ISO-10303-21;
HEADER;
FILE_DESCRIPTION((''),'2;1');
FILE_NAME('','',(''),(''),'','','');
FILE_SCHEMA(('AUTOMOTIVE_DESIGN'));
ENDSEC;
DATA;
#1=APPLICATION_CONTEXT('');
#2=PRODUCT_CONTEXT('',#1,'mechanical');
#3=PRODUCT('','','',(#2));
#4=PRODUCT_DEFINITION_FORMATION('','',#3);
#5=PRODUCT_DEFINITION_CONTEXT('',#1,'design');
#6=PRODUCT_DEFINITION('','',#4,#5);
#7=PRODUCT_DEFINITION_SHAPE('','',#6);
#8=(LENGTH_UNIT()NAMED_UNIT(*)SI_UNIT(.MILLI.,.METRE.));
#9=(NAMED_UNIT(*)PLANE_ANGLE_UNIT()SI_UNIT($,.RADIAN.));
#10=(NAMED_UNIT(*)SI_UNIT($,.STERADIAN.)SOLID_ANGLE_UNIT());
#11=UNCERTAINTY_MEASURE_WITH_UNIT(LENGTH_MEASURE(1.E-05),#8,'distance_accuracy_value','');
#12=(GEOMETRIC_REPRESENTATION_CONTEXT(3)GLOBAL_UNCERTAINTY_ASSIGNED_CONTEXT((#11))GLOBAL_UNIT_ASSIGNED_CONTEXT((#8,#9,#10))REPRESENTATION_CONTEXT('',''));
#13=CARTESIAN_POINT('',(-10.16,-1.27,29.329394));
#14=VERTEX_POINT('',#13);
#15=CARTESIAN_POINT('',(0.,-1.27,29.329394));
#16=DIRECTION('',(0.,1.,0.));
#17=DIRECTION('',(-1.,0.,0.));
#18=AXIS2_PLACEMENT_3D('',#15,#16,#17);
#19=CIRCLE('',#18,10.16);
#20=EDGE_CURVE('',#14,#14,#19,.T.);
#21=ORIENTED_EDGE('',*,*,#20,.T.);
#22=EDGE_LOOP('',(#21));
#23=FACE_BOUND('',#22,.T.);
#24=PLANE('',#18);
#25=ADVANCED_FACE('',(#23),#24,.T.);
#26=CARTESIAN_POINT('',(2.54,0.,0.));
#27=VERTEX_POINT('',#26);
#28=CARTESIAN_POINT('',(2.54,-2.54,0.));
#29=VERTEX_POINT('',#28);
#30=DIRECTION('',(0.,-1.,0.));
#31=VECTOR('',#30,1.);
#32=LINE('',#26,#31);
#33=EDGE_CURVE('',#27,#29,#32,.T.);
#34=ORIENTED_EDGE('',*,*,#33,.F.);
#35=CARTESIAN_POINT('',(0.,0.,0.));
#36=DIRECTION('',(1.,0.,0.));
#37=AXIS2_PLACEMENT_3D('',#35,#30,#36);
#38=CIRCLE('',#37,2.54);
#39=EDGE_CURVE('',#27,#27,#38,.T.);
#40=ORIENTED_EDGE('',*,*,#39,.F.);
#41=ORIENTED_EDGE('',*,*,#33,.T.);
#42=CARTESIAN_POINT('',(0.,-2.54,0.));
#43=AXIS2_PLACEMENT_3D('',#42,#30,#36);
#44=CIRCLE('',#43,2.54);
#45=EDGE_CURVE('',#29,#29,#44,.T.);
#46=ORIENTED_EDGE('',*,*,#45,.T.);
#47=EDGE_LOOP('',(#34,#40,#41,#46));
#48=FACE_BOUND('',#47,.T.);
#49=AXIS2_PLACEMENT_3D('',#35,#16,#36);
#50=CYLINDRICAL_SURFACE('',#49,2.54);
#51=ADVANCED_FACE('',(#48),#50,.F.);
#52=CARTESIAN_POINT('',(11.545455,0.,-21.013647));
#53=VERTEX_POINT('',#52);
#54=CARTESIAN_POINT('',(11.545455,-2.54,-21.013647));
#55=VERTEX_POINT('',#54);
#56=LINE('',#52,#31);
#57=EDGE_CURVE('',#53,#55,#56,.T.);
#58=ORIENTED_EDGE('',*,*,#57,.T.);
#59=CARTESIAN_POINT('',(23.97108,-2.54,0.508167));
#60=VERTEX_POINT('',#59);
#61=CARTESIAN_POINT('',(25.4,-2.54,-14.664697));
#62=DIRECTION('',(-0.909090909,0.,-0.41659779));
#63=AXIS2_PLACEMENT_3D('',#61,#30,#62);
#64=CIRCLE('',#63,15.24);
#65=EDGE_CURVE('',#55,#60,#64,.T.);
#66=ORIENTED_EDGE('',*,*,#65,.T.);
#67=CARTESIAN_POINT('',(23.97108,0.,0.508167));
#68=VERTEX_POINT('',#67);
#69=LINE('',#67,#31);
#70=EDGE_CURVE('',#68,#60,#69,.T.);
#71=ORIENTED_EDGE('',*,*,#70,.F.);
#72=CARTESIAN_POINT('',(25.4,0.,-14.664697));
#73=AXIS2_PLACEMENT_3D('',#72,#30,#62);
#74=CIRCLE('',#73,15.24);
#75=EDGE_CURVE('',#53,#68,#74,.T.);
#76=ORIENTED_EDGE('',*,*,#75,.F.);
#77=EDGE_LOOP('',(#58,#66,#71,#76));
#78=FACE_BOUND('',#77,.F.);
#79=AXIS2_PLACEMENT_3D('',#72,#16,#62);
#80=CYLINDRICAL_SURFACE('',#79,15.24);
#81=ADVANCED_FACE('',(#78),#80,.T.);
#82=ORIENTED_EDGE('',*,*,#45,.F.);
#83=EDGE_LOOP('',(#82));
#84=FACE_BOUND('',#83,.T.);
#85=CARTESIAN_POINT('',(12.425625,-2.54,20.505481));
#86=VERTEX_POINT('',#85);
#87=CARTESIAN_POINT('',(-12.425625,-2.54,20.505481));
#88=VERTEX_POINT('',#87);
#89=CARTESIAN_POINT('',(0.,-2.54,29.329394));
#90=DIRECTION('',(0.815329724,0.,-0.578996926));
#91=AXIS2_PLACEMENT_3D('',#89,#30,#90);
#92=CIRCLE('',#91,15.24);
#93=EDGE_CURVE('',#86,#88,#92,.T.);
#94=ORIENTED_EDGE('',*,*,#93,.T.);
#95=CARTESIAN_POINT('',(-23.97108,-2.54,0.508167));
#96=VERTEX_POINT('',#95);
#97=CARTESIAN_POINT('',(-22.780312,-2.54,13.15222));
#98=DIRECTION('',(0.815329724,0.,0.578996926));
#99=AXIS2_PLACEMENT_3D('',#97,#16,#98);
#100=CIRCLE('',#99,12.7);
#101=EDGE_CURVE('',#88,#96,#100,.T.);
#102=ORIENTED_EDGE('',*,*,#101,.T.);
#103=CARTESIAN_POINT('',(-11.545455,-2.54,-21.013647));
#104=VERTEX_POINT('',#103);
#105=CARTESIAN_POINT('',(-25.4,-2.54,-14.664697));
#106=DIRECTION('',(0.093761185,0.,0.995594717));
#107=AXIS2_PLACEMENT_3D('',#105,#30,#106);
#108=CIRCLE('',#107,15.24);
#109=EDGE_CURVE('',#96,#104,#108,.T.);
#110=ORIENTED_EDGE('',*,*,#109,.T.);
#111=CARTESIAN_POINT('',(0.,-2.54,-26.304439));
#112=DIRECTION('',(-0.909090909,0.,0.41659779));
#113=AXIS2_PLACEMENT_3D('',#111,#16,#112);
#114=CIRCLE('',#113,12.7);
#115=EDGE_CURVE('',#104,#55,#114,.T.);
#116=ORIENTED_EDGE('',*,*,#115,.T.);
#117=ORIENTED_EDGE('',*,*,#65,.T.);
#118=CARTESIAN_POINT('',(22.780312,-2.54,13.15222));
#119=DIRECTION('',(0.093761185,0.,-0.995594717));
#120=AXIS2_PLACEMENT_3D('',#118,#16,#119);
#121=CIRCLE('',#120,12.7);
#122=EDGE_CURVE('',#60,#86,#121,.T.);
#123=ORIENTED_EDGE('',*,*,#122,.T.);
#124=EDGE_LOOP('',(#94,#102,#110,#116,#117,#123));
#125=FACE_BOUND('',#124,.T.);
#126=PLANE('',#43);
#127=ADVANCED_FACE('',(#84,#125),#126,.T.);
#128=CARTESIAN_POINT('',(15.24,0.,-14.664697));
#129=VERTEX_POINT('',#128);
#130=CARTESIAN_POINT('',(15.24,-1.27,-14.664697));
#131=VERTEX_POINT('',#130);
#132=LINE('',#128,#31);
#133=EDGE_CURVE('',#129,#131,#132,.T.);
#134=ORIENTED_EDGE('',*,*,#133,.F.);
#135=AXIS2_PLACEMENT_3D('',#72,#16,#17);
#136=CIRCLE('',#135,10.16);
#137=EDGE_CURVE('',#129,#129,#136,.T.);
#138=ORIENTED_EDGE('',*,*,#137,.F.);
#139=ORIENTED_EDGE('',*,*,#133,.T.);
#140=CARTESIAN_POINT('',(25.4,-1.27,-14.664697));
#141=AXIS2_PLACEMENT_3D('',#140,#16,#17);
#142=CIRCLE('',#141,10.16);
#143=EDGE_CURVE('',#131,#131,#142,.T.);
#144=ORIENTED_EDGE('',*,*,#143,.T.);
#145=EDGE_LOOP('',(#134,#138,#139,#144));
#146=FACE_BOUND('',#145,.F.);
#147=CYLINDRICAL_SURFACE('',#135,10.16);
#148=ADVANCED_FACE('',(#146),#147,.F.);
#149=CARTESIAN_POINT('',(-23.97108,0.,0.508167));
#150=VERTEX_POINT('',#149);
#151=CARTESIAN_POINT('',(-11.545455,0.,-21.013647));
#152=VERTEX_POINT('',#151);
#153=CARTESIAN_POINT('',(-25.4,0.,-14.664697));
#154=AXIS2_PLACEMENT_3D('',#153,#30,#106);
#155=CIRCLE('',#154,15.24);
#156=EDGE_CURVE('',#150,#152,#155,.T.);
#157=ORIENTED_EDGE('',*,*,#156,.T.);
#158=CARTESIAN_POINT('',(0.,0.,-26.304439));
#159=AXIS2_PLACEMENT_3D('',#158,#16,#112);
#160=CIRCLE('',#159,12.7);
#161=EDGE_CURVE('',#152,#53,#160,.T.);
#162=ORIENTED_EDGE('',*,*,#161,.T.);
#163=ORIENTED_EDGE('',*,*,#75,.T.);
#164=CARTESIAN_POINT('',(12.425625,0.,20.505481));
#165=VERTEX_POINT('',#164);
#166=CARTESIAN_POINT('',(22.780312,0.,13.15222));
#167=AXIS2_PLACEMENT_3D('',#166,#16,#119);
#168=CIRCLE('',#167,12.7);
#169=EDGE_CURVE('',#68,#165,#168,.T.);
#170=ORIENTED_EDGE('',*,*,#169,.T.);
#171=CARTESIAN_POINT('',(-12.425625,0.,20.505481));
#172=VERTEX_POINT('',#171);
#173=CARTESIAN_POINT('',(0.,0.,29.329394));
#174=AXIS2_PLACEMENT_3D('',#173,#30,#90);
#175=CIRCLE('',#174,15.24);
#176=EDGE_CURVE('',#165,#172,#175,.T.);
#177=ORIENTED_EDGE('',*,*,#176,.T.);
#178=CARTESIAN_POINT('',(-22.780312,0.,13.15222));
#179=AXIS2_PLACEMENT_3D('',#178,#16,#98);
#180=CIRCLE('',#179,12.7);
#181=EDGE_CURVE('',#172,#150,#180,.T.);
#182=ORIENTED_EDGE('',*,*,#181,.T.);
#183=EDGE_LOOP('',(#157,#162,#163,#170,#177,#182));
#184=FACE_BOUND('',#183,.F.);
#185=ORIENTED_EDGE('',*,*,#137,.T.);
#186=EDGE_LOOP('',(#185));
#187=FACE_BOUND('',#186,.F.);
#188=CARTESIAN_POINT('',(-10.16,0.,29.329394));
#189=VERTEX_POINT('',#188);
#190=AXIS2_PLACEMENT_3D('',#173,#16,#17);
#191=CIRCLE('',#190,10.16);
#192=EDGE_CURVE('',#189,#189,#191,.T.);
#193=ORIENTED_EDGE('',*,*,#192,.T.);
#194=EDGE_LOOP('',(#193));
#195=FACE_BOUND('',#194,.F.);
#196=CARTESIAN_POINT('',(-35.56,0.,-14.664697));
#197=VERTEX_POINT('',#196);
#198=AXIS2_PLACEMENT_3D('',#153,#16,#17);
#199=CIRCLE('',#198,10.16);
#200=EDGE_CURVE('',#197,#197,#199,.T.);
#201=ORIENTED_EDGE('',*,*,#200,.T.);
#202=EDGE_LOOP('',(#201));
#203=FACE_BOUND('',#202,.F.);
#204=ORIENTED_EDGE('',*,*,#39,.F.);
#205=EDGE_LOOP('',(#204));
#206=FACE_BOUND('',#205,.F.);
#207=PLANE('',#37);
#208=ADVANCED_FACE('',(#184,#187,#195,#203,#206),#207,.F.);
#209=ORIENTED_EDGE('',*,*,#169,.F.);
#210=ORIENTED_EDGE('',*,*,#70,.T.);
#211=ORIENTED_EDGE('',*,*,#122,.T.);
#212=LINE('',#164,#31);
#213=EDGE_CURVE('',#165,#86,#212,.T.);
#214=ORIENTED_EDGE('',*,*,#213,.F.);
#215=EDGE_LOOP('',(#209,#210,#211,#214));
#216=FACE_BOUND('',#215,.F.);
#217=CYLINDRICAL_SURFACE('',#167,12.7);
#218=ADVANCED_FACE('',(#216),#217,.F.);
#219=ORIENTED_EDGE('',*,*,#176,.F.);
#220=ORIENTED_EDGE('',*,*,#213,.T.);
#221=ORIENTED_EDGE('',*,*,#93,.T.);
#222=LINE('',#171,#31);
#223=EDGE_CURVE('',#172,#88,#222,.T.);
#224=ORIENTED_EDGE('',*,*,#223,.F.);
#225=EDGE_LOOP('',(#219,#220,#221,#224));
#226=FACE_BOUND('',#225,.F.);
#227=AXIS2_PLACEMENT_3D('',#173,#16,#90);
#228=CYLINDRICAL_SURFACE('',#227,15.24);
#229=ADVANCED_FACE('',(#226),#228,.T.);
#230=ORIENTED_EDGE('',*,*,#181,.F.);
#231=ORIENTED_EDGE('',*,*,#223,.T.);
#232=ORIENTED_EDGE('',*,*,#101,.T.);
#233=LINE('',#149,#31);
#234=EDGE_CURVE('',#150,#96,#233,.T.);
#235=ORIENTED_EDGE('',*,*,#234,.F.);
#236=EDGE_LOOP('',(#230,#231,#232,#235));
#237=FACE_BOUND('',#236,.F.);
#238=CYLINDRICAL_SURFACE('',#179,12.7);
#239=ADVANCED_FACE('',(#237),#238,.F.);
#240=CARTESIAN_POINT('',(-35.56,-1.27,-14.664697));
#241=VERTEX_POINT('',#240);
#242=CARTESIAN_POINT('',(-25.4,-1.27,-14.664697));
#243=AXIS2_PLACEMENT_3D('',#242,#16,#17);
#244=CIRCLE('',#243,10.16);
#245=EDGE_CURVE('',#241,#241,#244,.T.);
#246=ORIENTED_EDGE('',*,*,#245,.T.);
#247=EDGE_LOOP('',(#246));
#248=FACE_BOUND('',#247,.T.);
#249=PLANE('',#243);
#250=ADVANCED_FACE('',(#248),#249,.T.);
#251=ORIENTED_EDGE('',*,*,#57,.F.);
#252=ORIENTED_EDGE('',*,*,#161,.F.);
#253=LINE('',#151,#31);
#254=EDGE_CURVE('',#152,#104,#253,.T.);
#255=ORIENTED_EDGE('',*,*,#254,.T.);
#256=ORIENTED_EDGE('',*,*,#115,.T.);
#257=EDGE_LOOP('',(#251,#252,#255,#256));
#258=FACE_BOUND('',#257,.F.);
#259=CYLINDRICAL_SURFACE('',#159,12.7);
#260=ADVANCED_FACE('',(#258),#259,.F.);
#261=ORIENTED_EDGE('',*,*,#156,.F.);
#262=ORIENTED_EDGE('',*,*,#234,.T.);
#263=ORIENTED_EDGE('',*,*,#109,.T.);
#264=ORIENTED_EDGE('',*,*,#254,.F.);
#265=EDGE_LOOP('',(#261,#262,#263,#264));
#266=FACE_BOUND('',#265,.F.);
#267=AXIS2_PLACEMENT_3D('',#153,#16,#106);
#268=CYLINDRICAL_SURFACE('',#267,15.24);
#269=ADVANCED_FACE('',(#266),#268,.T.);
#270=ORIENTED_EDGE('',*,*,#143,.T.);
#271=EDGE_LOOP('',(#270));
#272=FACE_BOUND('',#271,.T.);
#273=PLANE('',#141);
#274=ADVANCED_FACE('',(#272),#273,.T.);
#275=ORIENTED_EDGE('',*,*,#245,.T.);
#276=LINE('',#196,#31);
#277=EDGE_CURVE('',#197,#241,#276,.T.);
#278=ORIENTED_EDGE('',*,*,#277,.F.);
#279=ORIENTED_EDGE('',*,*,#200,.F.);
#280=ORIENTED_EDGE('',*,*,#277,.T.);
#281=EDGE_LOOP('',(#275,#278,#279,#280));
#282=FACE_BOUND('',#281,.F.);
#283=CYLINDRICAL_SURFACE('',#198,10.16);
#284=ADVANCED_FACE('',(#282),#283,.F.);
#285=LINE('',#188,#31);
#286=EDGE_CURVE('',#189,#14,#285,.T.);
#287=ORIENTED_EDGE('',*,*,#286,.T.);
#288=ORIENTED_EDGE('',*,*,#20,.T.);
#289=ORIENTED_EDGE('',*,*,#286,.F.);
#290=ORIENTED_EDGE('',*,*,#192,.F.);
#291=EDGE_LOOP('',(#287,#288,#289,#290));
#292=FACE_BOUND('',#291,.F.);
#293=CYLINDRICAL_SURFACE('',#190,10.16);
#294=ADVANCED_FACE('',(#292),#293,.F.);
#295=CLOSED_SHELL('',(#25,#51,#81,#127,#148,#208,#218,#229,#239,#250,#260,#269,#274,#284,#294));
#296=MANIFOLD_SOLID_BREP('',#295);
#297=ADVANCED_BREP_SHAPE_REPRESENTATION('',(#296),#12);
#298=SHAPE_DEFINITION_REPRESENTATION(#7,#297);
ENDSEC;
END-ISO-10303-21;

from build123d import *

# Parameters (mm, degrees)
F0_R     = 2.54
F1_DEPTH = 2.54
F2_R     = 10.16
F3_DEPTH = 1.27


# Not quite as in the source:
# - a feature names something its author has since deleted; it is built from what else it names


with BuildPart() as f1:
    # F0 (on Front) → F1 (new body)
    with BuildSketch(Plane.XZ):
        with BuildLine():
            ThreePointArc((23.9710795428, 0.5081666473), (11.7817898671, 6.8022195513), (12.4256249974, 20.5054805165))
            ThreePointArc((12.4256249974, 20.5054805165), (0, 44.5693936748), (-12.4256249974, 20.5054805165))
            ThreePointArc((-12.4256249974, 20.5054805165), (-11.7817898671, 6.8022195513), (-23.9710795428, 0.5081666473))
            ThreePointArc((-23.9710795428, 0.5081666473), (-38.5982271537, -22.2846968374), (-11.5454545455, -21.0136471639))
            ThreePointArc((-11.5454545455, -21.0136471639), (0, -13.6044391026), (11.5454545455, -21.0136471639))
            ThreePointArc((11.5454545455, -21.0136471639), (38.5982271537, -22.2846968374), (23.9710795428, 0.5081666473))
        make_face()
        Circle(F0_R, mode=Mode.SUBTRACT)
    extrude(amount=F1_DEPTH)

    # F2 (on face) → F3 (cut)
    with BuildSketch(Plane(origin=(0, 0, 0), x_dir=(-1, 0, 0), z_dir=(0, 1, 0))):
        with Locations((25.4, -14.6646968374)):
            Circle(F2_R)
        with Locations((0, 29.3293936748)):
            Circle(F2_R)
        with Locations((-25.4, -14.6646968374)):
            Circle(F2_R)
    extrude(amount=-F3_DEPTH, mode=Mode.SUBTRACT)


solid = f1.part
